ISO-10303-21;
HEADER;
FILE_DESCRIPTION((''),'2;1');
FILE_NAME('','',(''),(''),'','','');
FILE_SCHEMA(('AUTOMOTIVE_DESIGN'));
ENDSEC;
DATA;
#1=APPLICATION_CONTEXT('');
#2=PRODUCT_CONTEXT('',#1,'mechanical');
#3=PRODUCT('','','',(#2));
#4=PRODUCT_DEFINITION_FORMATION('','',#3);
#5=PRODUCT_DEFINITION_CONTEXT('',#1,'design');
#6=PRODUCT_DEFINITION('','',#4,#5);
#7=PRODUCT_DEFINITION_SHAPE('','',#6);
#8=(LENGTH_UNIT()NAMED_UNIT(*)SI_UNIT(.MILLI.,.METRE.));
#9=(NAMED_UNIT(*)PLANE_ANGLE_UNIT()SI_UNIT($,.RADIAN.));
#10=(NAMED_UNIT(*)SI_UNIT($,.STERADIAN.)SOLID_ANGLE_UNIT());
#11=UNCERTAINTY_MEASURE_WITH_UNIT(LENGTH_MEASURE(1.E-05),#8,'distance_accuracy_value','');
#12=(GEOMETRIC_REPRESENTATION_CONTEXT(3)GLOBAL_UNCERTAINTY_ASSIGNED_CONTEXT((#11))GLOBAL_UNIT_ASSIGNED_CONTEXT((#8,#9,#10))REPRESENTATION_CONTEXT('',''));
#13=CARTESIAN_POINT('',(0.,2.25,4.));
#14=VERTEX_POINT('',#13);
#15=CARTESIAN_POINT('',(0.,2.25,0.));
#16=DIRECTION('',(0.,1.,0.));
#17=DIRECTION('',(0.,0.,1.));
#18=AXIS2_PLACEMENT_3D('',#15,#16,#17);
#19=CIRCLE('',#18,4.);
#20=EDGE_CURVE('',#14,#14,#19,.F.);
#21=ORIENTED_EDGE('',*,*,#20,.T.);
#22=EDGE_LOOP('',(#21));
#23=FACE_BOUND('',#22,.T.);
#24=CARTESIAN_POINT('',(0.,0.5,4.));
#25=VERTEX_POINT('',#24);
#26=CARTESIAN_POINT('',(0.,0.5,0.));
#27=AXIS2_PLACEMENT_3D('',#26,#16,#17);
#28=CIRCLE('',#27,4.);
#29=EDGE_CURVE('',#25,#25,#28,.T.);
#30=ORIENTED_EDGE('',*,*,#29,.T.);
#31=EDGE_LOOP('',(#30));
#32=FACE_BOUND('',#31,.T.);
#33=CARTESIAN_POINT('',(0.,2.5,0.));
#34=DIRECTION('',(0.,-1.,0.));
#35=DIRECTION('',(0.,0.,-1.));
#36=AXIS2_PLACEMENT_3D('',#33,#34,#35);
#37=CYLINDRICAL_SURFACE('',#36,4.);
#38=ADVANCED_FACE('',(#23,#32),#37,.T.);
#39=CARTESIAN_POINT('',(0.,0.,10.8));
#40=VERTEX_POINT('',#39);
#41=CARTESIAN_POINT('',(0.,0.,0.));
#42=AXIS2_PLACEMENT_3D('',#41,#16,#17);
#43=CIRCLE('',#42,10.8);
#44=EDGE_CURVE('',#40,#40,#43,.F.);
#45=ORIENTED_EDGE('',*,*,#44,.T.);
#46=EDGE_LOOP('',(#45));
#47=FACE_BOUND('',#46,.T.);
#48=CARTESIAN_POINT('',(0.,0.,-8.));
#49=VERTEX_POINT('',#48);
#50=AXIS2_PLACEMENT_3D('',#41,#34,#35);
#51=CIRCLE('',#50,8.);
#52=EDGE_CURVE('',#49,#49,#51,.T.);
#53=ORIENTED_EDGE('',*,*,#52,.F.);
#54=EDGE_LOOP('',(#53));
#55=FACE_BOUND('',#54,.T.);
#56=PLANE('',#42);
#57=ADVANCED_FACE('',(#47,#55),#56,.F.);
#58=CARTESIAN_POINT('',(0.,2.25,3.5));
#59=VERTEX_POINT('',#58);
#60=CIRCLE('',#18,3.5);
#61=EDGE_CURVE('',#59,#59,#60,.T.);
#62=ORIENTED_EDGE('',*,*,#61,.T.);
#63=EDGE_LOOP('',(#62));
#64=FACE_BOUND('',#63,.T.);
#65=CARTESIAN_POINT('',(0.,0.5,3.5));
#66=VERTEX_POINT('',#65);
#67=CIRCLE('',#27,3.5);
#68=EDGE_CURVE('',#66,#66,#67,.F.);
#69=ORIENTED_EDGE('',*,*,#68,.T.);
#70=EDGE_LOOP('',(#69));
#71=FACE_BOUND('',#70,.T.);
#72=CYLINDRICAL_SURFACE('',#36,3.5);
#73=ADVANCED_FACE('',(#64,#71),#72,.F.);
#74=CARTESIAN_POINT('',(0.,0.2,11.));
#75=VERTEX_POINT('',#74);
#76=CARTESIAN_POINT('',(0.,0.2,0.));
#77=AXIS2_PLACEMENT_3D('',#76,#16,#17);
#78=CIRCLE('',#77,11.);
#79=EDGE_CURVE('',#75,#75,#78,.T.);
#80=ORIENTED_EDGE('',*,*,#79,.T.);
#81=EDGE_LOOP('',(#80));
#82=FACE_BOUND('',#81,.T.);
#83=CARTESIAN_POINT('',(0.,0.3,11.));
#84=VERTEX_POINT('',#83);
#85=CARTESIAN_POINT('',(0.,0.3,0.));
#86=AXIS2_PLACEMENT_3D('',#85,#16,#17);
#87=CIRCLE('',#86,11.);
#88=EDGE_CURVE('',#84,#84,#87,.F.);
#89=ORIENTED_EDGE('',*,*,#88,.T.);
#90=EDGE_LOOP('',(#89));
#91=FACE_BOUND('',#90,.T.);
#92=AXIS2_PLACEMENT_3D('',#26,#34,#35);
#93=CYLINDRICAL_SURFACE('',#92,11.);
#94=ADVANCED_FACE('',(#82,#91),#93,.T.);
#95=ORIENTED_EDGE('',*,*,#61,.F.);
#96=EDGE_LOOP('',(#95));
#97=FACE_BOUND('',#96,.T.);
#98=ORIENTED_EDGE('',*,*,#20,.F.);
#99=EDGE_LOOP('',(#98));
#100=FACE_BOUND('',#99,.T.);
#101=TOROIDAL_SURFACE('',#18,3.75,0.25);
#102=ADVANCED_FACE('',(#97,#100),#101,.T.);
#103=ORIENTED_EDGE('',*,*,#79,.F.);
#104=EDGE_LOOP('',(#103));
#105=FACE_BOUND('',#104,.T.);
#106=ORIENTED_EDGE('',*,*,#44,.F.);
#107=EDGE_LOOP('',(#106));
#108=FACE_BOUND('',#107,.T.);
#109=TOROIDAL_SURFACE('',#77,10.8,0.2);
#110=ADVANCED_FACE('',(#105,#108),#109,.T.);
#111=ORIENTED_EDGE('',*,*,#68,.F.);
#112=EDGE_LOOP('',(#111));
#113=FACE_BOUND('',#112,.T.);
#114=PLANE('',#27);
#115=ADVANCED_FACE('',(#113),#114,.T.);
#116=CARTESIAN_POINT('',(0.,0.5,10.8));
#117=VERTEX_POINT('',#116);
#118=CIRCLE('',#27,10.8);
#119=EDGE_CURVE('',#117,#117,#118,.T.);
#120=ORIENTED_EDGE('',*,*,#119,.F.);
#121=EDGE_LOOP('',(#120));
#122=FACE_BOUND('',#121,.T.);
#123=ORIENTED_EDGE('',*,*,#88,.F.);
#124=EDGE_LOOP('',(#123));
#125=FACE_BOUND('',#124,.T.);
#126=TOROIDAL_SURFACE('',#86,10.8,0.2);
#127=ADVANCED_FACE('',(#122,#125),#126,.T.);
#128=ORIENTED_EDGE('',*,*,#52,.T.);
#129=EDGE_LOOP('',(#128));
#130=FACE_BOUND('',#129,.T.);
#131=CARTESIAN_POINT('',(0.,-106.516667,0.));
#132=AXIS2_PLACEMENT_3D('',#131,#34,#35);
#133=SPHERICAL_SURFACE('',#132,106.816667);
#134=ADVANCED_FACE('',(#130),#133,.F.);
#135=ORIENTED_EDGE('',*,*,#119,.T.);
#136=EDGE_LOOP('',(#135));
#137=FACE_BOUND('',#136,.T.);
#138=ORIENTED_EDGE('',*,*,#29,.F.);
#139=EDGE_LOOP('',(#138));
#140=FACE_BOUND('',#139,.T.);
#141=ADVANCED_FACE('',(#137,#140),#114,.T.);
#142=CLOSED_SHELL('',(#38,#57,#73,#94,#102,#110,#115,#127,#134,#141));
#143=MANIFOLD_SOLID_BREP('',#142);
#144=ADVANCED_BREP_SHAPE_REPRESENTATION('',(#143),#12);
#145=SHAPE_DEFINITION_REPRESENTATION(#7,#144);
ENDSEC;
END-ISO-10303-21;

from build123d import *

# Parameters (mm, degrees)
SKETCH_1_R      = 11
EXTRUDE_1_DEPTH = 0.5
SKETCH_2_R      = 4
SKETCH_2_R_2    = 3.5
EXTRUDE_2_DEPTH = 2
FILLET_1_R      = 0.25
FILLET_2_R      = 0.2


with BuildPart() as part:
    # 草图1 → 凸台-拉伸1 (new body)
    with BuildSketch(Plane(origin=(0, 0, 0), x_dir=(1, 0, 0), z_dir=(0, 1, 0))):
        with Locations(Location((0, 0, 0), (0, 0, 270))):
            Circle(SKETCH_1_R)
    extrude(amount=EXTRUDE_1_DEPTH)

    # 草图2 → 凸台-拉伸2 (add)
    with BuildSketch(Plane(origin=(0, 0.5, 0), x_dir=(1, 0, 0), z_dir=(0, 1, 0))):
        with Locations(Location((0, 0, 0), (0, 0, 270))):
            Circle(SKETCH_2_R)
        with Locations(Location((0, 0, 0), (0, 0, 270))):
            Circle(SKETCH_2_R_2, mode=Mode.SUBTRACT)
    extrude(amount=EXTRUDE_2_DEPTH)

    # 圆角1
    fillet_1_edges = [part.edges().sort_by_distance(p)[0] for p in [
        (0, 2.5, -4),
        (0, 2.5, -3.5),
    ]]
    fillet(fillet_1_edges, radius=FILLET_1_R - 0.0001)  # a hair under: the kernel refuses the full size

    # 草图3 → 切除-旋转2 (revolve, cut)
    with BuildSketch(Plane(origin=(0, 0, 0), x_dir=(0, 0, -1), z_dir=(1, 0, 0)), mode=Mode.PRIVATE) as cut_revolve_2_sk:
        with BuildLine():
            Line((0, 0), (8, 0))
            ThreePointArc((8, 0), (4.002811512, 0.224973651), (0, 0.3))
            Line((0, 0.3), (0, 0))
        make_face()
    revolve(cut_revolve_2_sk.sketch.rotate(Axis((0, 0, 0), (0, 1, 0)), 180), axis=Axis((0, 0, 0), (0, 1, 0)), mode=Mode.SUBTRACT)

    # 圆角2
    fillet_2_edges = [part.edges().sort_by_distance(p)[0] for p in [
        (0, 0, -11),
        (0, 0.5, -11),
    ]]
    fillet(fillet_2_edges, radius=FILLET_2_R)


solid = part.part
